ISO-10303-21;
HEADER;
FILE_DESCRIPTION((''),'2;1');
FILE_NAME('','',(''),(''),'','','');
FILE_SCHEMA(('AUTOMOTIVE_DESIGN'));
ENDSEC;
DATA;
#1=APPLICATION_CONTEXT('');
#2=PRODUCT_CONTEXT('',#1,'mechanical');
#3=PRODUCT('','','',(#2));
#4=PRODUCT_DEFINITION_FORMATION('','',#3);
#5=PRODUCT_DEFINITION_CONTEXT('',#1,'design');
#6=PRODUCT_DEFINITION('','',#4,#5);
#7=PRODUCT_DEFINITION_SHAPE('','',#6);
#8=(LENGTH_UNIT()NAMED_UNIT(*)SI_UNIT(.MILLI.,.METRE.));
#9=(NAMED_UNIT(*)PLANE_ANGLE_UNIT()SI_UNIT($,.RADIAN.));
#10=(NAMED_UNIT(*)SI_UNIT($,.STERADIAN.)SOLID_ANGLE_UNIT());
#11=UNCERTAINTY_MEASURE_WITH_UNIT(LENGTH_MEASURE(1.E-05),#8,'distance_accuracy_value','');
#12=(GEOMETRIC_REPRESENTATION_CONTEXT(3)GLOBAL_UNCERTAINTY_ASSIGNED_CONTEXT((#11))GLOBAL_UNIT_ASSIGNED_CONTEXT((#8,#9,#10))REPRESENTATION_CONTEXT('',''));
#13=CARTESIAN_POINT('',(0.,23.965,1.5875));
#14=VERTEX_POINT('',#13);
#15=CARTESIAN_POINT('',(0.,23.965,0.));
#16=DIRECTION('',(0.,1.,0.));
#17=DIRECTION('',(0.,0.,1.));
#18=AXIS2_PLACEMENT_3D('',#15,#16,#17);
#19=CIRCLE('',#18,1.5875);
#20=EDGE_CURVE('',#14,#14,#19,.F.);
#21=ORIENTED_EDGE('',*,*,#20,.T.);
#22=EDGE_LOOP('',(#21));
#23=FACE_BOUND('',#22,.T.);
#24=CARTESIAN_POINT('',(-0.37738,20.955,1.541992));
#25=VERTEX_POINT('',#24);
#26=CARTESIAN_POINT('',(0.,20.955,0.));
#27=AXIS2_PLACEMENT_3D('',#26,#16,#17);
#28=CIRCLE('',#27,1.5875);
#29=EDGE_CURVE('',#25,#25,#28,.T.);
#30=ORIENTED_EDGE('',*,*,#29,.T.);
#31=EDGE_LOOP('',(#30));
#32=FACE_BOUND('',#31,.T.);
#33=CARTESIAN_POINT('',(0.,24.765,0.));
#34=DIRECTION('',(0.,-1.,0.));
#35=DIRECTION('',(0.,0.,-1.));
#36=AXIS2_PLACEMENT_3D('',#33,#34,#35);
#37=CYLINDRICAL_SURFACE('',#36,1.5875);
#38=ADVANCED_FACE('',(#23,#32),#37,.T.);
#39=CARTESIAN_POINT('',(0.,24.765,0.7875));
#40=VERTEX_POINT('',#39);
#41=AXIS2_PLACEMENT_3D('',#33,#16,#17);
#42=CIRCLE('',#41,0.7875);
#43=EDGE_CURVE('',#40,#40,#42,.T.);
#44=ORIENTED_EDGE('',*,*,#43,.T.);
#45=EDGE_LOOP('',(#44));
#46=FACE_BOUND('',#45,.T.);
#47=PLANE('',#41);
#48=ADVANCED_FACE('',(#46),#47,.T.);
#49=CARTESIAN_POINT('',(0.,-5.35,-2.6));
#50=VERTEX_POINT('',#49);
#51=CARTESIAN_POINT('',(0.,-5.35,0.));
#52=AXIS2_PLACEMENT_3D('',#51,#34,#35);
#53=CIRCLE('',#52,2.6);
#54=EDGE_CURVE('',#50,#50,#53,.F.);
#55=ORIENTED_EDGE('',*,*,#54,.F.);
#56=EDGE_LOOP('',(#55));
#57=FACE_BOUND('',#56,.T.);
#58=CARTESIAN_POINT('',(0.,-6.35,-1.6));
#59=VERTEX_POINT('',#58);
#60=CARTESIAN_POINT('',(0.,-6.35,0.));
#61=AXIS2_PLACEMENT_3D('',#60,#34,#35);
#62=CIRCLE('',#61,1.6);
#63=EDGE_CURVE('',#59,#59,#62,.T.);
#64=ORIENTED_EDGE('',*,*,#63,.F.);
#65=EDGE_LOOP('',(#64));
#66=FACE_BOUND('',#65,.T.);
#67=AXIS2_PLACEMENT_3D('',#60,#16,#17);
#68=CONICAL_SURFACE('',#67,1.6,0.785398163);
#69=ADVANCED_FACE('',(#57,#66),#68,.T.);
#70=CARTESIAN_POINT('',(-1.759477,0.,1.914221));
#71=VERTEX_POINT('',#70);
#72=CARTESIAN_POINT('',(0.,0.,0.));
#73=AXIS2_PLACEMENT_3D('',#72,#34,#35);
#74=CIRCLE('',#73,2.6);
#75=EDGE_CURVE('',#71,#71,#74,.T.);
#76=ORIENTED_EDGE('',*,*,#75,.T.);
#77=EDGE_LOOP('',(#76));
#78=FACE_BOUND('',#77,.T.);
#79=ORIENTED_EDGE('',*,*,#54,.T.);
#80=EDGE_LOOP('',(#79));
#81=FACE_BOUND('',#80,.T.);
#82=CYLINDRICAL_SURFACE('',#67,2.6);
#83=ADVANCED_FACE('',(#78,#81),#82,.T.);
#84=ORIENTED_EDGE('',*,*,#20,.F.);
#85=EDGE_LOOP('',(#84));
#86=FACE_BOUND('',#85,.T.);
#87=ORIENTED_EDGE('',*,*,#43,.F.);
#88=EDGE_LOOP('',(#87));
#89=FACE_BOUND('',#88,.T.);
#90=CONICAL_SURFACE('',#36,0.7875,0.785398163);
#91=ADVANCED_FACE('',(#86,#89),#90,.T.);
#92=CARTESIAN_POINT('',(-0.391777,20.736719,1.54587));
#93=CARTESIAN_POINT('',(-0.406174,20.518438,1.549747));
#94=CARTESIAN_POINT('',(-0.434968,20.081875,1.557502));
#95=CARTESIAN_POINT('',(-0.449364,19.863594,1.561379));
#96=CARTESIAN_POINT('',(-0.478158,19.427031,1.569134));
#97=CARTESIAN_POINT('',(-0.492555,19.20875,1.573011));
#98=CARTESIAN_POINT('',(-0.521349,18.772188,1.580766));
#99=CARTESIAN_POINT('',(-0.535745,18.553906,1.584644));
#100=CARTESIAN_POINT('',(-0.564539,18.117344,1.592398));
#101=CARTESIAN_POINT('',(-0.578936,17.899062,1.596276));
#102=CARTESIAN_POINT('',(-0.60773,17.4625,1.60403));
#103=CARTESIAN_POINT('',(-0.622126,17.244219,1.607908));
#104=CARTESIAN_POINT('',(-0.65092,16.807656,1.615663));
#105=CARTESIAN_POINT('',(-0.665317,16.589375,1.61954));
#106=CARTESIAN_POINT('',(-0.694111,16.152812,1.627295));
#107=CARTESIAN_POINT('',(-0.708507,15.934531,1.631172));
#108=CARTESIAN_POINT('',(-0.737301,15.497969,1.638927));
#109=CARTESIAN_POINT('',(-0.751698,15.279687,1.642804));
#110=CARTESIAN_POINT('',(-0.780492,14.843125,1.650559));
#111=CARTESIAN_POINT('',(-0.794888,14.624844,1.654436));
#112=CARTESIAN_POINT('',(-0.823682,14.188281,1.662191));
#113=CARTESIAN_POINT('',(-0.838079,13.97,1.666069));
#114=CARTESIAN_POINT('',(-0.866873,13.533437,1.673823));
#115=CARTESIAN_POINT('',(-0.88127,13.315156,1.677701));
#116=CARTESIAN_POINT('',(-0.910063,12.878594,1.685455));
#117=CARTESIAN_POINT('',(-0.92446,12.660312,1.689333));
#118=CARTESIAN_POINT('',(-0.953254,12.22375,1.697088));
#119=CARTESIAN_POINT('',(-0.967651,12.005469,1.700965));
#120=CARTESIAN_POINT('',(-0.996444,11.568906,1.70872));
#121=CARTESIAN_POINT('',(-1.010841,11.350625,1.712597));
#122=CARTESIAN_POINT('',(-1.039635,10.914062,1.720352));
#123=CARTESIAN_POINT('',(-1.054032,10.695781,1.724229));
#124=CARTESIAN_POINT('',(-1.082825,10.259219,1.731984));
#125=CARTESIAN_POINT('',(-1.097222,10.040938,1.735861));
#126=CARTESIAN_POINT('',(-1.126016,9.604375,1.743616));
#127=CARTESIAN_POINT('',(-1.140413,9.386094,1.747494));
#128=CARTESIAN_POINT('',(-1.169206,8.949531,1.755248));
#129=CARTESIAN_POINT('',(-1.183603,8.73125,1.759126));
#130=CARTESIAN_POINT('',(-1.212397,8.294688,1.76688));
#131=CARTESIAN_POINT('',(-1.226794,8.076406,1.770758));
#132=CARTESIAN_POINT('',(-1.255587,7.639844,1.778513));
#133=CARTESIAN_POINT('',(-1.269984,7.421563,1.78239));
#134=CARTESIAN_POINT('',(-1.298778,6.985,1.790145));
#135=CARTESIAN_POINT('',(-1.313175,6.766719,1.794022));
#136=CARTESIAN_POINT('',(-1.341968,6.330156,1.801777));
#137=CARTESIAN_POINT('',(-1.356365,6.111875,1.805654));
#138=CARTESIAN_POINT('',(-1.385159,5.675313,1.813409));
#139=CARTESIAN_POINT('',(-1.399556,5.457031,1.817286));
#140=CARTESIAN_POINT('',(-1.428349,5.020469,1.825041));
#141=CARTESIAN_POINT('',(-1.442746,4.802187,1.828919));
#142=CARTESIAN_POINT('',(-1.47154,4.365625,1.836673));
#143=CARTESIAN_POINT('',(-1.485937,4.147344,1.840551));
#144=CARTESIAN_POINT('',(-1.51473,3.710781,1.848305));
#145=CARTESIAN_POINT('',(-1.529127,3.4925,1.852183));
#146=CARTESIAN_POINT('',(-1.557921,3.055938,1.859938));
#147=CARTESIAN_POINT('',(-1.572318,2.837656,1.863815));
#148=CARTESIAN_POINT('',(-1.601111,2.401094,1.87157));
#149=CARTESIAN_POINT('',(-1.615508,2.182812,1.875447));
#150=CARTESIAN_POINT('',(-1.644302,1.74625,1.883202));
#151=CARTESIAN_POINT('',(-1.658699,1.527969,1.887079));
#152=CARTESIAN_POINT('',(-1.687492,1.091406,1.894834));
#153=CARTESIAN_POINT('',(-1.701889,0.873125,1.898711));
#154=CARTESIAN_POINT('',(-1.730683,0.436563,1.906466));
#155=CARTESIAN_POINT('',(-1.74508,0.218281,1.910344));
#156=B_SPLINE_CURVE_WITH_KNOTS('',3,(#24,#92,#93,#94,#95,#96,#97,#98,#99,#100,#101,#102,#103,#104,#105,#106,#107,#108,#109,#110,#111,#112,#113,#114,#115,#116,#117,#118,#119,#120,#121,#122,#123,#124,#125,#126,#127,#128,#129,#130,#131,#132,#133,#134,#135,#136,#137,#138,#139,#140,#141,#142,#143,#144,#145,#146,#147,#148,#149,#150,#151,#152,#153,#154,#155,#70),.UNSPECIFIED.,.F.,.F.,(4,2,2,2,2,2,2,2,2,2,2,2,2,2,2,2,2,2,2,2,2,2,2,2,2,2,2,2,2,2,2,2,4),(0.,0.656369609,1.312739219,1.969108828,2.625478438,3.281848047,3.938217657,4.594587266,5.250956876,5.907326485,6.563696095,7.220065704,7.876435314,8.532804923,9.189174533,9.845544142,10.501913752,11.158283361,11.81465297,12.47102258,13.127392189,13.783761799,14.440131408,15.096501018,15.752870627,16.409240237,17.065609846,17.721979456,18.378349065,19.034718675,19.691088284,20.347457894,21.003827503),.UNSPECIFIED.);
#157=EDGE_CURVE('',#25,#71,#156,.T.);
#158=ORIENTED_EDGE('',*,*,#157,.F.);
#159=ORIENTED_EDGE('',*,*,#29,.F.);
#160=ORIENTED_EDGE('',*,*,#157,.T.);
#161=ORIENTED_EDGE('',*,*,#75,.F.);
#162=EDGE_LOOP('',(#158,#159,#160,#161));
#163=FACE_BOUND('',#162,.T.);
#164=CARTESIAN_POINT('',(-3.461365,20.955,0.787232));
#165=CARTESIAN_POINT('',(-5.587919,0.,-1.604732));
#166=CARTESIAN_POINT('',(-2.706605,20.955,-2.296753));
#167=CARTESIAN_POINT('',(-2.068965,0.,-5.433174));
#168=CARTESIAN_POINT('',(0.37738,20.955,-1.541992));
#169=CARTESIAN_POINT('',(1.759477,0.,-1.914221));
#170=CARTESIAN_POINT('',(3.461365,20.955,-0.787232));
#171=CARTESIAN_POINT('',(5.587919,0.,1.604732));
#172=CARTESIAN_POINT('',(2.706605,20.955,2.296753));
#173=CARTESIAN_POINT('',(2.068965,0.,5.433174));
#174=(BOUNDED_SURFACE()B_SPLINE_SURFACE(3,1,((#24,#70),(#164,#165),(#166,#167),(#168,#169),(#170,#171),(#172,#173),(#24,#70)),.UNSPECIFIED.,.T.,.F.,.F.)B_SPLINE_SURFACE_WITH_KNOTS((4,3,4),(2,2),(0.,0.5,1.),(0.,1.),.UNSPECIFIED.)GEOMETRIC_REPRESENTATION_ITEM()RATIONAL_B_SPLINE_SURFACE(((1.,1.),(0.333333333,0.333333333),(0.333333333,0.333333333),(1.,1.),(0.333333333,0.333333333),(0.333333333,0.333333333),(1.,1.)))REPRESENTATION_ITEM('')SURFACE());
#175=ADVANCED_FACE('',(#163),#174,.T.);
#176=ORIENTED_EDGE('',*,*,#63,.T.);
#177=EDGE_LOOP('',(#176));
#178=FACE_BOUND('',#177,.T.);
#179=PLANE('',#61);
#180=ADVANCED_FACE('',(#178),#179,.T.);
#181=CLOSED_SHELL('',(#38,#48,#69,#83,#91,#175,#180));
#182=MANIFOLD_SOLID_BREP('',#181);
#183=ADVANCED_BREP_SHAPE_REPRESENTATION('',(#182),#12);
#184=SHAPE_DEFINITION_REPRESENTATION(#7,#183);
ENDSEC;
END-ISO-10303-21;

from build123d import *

# Parameters (mm, degrees)
SKETCH3_R           = 2.6
BOSS_EXTRUDE1_DEPTH = 6.35
SKETCH4_R           = 1.5875
BOSS_EXTRUDE2_DEPTH = 3.81
CHAMFER5_SIZE       = 1
CHAMFER6_SIZE       = 0.8


with BuildPart() as part:
    # Loft1: read off the stored shape, not the designer's step
    # Loft1: loft between two sections, ruled curve by curve
    loft1_from = [
        Edge.make_bspline([(-0.37738018, 20.955, 1.541992364), (-3.461364907, 20.955, 0.787232004), (-2.706604547, 20.955, -2.296752724), (0.37738018, 20.955, -1.541992364), (3.461364907, 20.955, -0.787232004), (2.706604547, 20.955, 2.296752724), (-0.37738018, 20.955, 1.541992364)], [0, 0, 0, 0, 0.5, 0.5, 0.5, 1, 1, 1, 1], 3, [1, 0.333333333, 0.333333333, 1, 0.333333333, 0.333333333, 1]),
    ]
    loft1_to = [
        Edge.make_bspline([(-1.759476646, 0, 1.914220972), (-5.587918591, 0, -1.60473232), (-2.068965299, 0, -5.433174265), (1.759476646, 0, -1.914220972), (5.587918591, 0, 1.60473232), (2.068965299, 0, 5.433174265), (-1.759476646, 0, 1.914220972)], [0, 0, 0, 0, 0.5, 0.5, 0.5, 1, 1, 1, 1], 3, [1, 0.333333333, 0.333333333, 1, 0.333333333, 0.333333333, 1]),
    ]
    loft1 = Solid(Shell([*[Face.make_surface_from_curves(loft1_from[k], loft1_to[k]) for k in range(1)], Face(Wire(loft1_from)), Face(Wire(loft1_to))]))
    add(loft1)

    # Sketch3 → Boss-Extrude1 (add)
    with BuildSketch(Plane.XZ):
        with Locations(Location((0, 0, 0), (0, 0, 132.588))):
            Circle(SKETCH3_R)
    extrude(amount=BOSS_EXTRUDE1_DEPTH)

    # Sketch4 → Boss-Extrude2 (add)
    with BuildSketch(Plane(origin=(0, 20.955, 0), x_dir=(1, 0, 0), z_dir=(0, 1, 0))):
        with Locations(Location((0, 0, 0), (0, 0, 256.248))):
            Circle(SKETCH4_R)
    extrude(amount=BOSS_EXTRUDE2_DEPTH)

    # Chamfer5
    chamfer5_edges = [part.edges().sort_by_distance(p)[0] for p in [
        (1.759476646, -6.35, -1.914220972),
    ]]
    chamfer(chamfer5_edges, length=CHAMFER5_SIZE)

    # Chamfer6
    chamfer6_edges = [part.edges().sort_by_distance(p)[0] for p in [
        (0.37738018, 24.765, -1.541992364),
    ]]
    chamfer(chamfer6_edges, length=CHAMFER6_SIZE)


solid = part.part
